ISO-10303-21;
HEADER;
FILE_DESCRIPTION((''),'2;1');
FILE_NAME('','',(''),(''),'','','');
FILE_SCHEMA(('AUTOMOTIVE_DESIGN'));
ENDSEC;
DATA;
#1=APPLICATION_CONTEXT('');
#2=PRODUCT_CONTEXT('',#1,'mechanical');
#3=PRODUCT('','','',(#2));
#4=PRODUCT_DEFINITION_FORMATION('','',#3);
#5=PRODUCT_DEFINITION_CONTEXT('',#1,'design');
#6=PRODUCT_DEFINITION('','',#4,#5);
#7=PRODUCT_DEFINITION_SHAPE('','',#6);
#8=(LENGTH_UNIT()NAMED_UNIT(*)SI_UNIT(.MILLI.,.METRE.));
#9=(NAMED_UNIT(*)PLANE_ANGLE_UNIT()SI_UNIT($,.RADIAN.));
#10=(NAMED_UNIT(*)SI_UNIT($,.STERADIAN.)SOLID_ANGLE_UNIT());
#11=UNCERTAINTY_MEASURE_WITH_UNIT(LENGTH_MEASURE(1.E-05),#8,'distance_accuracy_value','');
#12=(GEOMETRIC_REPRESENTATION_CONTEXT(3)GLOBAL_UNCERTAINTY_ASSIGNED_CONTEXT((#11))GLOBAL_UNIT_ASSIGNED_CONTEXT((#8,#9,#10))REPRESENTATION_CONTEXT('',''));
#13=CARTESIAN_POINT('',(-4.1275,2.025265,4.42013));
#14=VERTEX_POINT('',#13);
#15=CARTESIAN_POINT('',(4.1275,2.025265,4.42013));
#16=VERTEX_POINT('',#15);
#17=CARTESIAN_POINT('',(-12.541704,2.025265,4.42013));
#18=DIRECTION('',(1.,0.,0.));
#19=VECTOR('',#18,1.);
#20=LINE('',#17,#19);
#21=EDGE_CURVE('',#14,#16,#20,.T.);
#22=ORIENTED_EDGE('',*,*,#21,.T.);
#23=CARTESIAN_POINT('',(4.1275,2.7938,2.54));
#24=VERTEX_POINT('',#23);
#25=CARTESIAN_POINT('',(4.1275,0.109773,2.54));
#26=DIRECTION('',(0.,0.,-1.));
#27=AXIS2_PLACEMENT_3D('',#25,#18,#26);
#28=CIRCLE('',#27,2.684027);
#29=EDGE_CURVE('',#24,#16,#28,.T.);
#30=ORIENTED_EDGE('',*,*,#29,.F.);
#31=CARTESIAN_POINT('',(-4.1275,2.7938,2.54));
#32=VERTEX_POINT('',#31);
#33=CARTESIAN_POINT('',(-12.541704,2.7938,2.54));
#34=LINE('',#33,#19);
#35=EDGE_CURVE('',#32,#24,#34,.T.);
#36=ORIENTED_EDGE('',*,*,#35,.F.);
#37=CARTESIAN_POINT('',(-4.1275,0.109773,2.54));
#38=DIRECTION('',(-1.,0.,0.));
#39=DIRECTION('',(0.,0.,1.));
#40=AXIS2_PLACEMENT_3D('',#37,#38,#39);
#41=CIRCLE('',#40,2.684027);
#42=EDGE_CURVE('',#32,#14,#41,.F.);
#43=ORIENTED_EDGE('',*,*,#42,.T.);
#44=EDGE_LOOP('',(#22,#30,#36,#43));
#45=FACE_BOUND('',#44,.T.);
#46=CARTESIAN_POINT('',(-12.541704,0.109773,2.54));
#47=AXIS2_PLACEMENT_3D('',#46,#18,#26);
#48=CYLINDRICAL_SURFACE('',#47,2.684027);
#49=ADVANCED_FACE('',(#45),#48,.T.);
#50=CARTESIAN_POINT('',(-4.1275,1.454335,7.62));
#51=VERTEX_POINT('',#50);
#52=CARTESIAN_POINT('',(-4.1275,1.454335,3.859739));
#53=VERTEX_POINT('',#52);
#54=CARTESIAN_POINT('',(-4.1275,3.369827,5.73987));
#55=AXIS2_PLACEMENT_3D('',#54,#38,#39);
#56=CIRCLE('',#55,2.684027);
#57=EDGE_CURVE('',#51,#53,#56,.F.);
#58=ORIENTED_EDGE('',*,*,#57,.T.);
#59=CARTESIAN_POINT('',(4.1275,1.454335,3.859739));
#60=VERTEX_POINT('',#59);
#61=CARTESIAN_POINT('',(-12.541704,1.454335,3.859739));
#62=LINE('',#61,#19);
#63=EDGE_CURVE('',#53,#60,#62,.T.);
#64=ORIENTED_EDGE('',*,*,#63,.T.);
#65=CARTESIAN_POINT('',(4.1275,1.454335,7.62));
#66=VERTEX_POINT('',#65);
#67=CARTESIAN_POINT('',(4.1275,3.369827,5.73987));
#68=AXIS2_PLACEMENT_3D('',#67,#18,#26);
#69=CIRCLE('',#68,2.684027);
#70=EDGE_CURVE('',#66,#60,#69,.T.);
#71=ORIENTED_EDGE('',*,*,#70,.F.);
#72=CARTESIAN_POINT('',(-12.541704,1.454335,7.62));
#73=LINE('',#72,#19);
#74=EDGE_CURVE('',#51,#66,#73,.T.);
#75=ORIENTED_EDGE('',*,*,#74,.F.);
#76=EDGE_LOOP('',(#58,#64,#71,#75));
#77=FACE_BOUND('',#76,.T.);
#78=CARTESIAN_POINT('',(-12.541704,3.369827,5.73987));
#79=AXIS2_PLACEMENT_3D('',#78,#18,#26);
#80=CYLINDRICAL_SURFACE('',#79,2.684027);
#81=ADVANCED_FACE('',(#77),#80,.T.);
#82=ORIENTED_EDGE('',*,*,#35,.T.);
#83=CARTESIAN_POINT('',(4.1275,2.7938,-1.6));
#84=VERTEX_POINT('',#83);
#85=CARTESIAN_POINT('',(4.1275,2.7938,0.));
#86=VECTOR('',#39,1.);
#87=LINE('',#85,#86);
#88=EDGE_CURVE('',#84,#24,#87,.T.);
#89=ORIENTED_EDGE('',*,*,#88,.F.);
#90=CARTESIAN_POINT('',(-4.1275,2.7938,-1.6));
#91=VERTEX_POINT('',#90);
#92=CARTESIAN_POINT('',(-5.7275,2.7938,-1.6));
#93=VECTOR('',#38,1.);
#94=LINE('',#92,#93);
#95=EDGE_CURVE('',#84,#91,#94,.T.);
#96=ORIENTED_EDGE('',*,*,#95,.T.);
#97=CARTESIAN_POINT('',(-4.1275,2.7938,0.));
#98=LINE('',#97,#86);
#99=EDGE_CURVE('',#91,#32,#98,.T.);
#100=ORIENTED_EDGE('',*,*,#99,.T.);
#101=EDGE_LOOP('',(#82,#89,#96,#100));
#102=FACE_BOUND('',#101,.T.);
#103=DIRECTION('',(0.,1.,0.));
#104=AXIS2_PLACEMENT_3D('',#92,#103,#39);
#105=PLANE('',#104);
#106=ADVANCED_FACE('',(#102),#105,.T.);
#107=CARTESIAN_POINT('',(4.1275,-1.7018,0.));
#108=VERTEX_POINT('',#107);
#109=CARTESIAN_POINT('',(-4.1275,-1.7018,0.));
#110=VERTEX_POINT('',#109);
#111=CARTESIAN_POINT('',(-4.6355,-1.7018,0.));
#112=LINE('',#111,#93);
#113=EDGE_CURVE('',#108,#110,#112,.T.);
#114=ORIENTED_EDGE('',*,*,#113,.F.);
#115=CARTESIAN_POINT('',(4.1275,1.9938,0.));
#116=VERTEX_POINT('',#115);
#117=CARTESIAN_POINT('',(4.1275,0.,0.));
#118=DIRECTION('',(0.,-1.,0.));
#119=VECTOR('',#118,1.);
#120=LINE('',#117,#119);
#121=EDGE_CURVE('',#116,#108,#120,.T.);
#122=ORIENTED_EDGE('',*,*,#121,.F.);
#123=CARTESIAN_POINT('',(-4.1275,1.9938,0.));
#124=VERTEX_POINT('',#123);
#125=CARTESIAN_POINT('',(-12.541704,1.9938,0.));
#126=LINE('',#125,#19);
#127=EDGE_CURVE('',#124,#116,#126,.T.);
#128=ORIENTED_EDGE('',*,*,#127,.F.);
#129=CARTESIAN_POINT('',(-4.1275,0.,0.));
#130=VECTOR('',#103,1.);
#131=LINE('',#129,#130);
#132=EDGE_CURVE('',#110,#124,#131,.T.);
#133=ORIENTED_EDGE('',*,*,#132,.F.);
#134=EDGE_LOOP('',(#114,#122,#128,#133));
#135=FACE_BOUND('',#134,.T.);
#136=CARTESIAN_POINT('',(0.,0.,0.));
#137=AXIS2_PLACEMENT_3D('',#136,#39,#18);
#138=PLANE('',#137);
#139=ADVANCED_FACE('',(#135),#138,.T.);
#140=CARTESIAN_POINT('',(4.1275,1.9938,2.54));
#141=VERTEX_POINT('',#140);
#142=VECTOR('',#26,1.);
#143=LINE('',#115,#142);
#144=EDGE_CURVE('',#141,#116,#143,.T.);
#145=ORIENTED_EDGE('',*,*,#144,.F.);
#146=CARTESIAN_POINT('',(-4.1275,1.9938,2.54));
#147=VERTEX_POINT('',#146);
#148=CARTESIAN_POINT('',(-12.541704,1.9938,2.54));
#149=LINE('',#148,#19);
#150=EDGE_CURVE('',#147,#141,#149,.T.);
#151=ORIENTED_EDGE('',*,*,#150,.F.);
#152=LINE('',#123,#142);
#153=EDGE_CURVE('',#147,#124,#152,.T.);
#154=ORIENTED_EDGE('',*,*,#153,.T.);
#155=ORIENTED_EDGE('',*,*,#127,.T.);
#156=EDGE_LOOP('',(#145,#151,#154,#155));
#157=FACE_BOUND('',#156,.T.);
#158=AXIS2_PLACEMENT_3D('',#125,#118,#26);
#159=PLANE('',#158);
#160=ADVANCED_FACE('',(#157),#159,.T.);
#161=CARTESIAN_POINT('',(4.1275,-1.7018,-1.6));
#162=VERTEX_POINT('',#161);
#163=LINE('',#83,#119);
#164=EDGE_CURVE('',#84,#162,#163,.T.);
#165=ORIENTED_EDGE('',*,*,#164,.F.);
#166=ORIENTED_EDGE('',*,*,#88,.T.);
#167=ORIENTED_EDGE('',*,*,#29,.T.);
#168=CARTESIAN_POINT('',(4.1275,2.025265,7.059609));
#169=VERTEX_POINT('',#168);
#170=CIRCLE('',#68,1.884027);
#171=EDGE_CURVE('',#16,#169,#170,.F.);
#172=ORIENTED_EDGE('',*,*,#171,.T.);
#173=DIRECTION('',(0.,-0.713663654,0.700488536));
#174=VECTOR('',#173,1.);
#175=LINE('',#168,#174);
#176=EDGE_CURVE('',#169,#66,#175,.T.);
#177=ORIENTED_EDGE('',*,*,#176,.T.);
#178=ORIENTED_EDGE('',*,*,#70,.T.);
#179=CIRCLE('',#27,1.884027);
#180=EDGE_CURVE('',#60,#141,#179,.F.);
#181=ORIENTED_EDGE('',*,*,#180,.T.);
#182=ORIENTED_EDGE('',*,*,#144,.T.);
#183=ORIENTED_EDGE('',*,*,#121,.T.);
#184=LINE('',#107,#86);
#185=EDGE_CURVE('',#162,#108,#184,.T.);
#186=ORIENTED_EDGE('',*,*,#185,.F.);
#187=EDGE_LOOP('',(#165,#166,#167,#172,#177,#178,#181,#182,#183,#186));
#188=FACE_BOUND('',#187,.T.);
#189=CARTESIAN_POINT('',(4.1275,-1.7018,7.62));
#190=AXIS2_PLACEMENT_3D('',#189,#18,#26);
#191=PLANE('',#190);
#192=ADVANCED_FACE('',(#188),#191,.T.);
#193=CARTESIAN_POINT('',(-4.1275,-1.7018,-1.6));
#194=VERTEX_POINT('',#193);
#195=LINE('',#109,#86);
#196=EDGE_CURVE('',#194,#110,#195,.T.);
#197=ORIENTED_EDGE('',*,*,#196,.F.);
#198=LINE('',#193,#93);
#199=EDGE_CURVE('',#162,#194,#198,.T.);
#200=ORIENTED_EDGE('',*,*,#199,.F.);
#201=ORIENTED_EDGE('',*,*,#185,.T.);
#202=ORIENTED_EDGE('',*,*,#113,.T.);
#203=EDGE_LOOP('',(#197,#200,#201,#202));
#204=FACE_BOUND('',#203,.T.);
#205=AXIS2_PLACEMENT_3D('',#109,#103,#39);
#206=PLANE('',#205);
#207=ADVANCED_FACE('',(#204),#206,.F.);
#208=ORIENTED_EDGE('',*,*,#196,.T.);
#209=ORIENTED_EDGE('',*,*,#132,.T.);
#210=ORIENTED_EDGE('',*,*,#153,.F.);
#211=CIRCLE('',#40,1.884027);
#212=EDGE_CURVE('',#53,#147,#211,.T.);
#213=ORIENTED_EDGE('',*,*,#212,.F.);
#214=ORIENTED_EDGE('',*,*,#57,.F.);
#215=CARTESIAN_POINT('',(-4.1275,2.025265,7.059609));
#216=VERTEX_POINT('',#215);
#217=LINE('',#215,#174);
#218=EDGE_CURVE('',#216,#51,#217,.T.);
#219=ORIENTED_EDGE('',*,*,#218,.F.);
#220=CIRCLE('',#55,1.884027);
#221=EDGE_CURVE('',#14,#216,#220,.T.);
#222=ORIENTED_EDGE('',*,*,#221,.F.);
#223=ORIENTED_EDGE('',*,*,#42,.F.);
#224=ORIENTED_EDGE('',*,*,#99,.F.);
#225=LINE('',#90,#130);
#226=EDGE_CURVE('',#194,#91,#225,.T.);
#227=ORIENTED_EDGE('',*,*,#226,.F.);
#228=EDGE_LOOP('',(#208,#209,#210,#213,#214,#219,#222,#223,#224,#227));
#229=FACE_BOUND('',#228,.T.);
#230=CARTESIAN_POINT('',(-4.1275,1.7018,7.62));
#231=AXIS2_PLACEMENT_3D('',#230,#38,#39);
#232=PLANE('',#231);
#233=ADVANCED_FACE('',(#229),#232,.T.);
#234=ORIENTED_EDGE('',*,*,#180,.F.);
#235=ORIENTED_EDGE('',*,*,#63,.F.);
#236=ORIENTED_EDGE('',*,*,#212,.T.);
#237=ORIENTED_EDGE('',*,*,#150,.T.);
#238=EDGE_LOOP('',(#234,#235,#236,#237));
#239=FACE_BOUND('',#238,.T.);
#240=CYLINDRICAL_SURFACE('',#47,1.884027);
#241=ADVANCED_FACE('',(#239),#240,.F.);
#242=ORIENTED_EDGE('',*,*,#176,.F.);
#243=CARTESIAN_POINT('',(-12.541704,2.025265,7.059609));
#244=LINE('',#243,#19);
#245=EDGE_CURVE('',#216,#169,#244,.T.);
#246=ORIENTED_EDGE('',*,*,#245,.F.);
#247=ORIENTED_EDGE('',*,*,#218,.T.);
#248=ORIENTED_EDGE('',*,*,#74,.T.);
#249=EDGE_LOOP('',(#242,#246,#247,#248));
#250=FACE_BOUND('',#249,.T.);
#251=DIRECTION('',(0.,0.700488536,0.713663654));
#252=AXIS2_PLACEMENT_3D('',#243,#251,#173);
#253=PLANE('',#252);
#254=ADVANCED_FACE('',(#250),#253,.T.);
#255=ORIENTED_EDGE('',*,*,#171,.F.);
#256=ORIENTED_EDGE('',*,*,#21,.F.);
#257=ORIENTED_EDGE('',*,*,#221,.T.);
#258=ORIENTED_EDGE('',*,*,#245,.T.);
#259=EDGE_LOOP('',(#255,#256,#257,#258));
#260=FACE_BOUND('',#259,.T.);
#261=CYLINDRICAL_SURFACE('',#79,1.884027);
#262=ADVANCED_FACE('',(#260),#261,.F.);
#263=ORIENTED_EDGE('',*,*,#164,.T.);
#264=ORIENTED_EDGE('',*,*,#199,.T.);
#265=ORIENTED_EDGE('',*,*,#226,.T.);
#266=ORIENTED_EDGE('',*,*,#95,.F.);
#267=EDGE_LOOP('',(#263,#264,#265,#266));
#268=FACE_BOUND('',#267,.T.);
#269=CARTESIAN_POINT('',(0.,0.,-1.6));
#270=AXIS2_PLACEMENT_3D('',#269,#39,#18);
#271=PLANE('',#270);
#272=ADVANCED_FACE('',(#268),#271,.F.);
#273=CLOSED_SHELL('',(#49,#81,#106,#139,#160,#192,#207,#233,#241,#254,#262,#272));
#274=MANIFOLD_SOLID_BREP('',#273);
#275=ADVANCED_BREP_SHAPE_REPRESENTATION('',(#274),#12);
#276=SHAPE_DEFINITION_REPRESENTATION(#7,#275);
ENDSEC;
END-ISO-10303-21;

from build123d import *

# Parameters (mm, degrees)
BOSS_EXTRUDE1_DEPTH            = 1.6
QQ_DEPTH                       = 7.62
BOSS_EXTRUDE3_DEPTH            = 4.1275
BOSS_EXTRUDE3_DEPTH_BACK       = 4.1275
CUT_EXTRUDE1_REACH             = 16.256
CUT_EXTRUDE1_DIRECTION_2_DEPTH = 0.508
SURFACECUT1_START              = -3.7338
SURFACECUT1_DEPTH              = 4.1656
SURFACECUT1_START_2            = 0.4318
SURFACECUT1_2_DEPTH            = 2.362
SURFACECUT1_3_OUTLINE_W        = 8.255
SURFACECUT1_3_OUTLINE_H        = 1.6
SURFACECUT1_3_DEPTH            = 2.032


# Read off the part's stored shape, not the designer's step: SurfaceCut1
with BuildPart() as part:
    # Sketch1 → Boss-Extrude1 (new body)
    with BuildSketch(Plane.XY):
        Polygon((-5.7275, -2.7938), (-5.7275, 2.7938), (5.7275, 2.7938), (5.7275, -2.7938), (5.7275, -3.7338), (-5.7275, -3.7338), align=None)
    extrude(amount=-BOSS_EXTRUDE1_DEPTH)

    # Sketch2 → qq (add)
    with BuildSketch(Plane.XY):
        Polygon((-4.6355, 1.7018), (-4.6355, 2.7938), (-5.7275, 2.7938), (-5.7275, -3.7338), (5.7275, -3.7338), (5.7275, 2.7938), (4.6355, 2.7938), (4.6355, 1.7018), (4.6355, -1.7018), (-4.6355, -1.7018), align=None)
    extrude(amount=QQ_DEPTH)

    # Sketch3 → Boss-Extrude3 (add, two sides: drawn at the far end of the back side and taken through both)
    with BuildSketch(Plane(origin=(0, 0, 0), x_dir=(0, 0, -1), z_dir=(1, 0, 0)).offset(-BOSS_EXTRUDE3_DEPTH_BACK)):
        with BuildLine():
            Line((0, 2.7938), (0, 1.9938))
            Line((0, 1.9938), (-2.54, 1.9938))
            ThreePointArc((-2.54, 1.9938), (-3.252870113, 1.853726552), (-3.859739447, 1.454334539))
            ThreePointArc((-3.859739447, 1.454334539), (-5.739869724, 0.6858), (-7.62, 1.454334539))
            Line((-7.62, 1.454334539), (-7.059609171, 2.025265461))
            ThreePointArc((-7.059609171, 2.025265461), (-5.739869724, 1.4858), (-4.420130276, 2.025265461))
            ThreePointArc((-4.420130276, 2.025265461), (-3.555570676, 2.594248239), (-2.54, 2.7938))
            Line((-2.54, 2.7938), (0, 2.7938))
        make_face()
    extrude(amount=BOSS_EXTRUDE3_DEPTH + BOSS_EXTRUDE3_DEPTH_BACK)

    # Sketch4 → Cut-Extrude1 (cut, up to next)
    with BuildSketch(Plane.ZY.offset(5.7275), mode=Mode.PRIVATE) as cut_extrude1_sk1:
        with BuildLine():
            Line((7.62, 0.6858), (7.62, 2.7938))
            Line((7.62, 2.7938), (0, 2.7938))
            Line((0, 2.7938), (0, 1.9938))
            Line((0, 1.9938), (0, 1.7398))
            Line((0, 1.7398), (2.54, 1.7398))
            ThreePointArc((2.54, 1.7398), (3.156762684, 1.618610916), (3.681815359, 1.273063971))
            ThreePointArc((3.681815359, 1.273063971), (4.628191619, 0.650236125), (5.739869724, 0.4318))
            Line((5.739869724, 0.4318), (7.62, 0.4318))
            Line((7.62, 0.4318), (7.62, 0.6858))
        make_face()
    cut_extrude1_tool1 = extrude(cut_extrude1_sk1.sketch, amount=-CUT_EXTRUDE1_REACH, mode=Mode.PRIVATE) & part.part
    cut_extrude1 = cut_extrude1_tool1.solids().sort_by_distance((-5.7275, 1.850249, 4.529461))[0]
    add(cut_extrude1, mode=Mode.SUBTRACT)

    # Sketch4 → Cut-Extrude1 direction 2 (cut)
    with BuildSketch(Plane.ZY.offset(5.7275)):
        with BuildLine():
            Line((7.62, 0.6858), (7.62, 2.7938))
            Line((7.62, 2.7938), (0, 2.7938))
            Line((0, 2.7938), (0, 1.9938))
            Line((0, 1.9938), (0, 1.7398))
            Line((0, 1.7398), (2.54, 1.7398))
            ThreePointArc((2.54, 1.7398), (3.156762684, 1.618610916), (3.681815359, 1.273063971))
            ThreePointArc((3.681815359, 1.273063971), (4.628191619, 0.650236125), (5.739869724, 0.4318))
            Line((5.739869724, 0.4318), (7.62, 0.4318))
            Line((7.62, 0.4318), (7.62, 0.6858))
        make_face()
    cut_extrude1_direction_2 = extrude(amount=CUT_EXTRUDE1_DIRECTION_2_DEPTH, mode=Mode.SUBTRACT)

    # Mirror1: Cut-Extrude1, Cut-Extrude1 direction 2 across plane
    add(cut_extrude1.mirror(Plane(origin=(0, 0, 0), x_dir=(0, 0, 1), z_dir=(1, 0, 0))), mode=Mode.SUBTRACT)
    add(cut_extrude1_direction_2.mirror(Plane(origin=(0, 0, 0), x_dir=(0, 0, 1), z_dir=(1, 0, 0))), mode=Mode.SUBTRACT)

    # SurfaceCut1 outline → SurfaceCut1 (cut)
    with BuildSketch(Plane(origin=(0, 0, 0), x_dir=(1, 0, 0), z_dir=(0, 1, 0)).offset(SURFACECUT1_START)):
        Polygon((-4.1275, 0), (-4.1275, 1.6), (-5.7275, 1.6), (-5.7275, -7.62), (5.7275, -7.62), (5.7275, 1.6), (4.1275, 1.6), (4.1275, 0), align=None)
    extrude(amount=SURFACECUT1_DEPTH, mode=Mode.SUBTRACT)

    # SurfaceCut1 2 outline → SurfaceCut1 2 (cut)
    with BuildSketch(Plane(origin=(0, 0, 0), x_dir=(1, 0, 0), z_dir=(0, 1, 0)).offset(SURFACECUT1_START_2)):
        Polygon((-4.1275, 0), (-4.1275, 1.6), (-5.7275, 1.6), (-5.7275, -7.62), (-4.6355, -7.62), (-4.6355, 0), align=None)
        Polygon((5.7275, 1.6), (4.1275, 1.6), (4.1275, 0), (4.6355, 0), (4.6355, -7.62), (5.7275, -7.62), align=None)
    extrude(amount=SURFACECUT1_2_DEPTH, mode=Mode.SUBTRACT)

    # SurfaceCut1 3 outline → SurfaceCut1 3 (cut)
    with BuildSketch(Plane(origin=(0, 0, 0), x_dir=(1, 0, 0), z_dir=(0, 1, 0)).offset(SURFACECUT1_START)):
        with Locations((0, 0.8)):
            Rectangle(SURFACECUT1_3_OUTLINE_W, SURFACECUT1_3_OUTLINE_H)
    extrude(amount=SURFACECUT1_3_DEPTH, mode=Mode.SUBTRACT)


solid = part.part
